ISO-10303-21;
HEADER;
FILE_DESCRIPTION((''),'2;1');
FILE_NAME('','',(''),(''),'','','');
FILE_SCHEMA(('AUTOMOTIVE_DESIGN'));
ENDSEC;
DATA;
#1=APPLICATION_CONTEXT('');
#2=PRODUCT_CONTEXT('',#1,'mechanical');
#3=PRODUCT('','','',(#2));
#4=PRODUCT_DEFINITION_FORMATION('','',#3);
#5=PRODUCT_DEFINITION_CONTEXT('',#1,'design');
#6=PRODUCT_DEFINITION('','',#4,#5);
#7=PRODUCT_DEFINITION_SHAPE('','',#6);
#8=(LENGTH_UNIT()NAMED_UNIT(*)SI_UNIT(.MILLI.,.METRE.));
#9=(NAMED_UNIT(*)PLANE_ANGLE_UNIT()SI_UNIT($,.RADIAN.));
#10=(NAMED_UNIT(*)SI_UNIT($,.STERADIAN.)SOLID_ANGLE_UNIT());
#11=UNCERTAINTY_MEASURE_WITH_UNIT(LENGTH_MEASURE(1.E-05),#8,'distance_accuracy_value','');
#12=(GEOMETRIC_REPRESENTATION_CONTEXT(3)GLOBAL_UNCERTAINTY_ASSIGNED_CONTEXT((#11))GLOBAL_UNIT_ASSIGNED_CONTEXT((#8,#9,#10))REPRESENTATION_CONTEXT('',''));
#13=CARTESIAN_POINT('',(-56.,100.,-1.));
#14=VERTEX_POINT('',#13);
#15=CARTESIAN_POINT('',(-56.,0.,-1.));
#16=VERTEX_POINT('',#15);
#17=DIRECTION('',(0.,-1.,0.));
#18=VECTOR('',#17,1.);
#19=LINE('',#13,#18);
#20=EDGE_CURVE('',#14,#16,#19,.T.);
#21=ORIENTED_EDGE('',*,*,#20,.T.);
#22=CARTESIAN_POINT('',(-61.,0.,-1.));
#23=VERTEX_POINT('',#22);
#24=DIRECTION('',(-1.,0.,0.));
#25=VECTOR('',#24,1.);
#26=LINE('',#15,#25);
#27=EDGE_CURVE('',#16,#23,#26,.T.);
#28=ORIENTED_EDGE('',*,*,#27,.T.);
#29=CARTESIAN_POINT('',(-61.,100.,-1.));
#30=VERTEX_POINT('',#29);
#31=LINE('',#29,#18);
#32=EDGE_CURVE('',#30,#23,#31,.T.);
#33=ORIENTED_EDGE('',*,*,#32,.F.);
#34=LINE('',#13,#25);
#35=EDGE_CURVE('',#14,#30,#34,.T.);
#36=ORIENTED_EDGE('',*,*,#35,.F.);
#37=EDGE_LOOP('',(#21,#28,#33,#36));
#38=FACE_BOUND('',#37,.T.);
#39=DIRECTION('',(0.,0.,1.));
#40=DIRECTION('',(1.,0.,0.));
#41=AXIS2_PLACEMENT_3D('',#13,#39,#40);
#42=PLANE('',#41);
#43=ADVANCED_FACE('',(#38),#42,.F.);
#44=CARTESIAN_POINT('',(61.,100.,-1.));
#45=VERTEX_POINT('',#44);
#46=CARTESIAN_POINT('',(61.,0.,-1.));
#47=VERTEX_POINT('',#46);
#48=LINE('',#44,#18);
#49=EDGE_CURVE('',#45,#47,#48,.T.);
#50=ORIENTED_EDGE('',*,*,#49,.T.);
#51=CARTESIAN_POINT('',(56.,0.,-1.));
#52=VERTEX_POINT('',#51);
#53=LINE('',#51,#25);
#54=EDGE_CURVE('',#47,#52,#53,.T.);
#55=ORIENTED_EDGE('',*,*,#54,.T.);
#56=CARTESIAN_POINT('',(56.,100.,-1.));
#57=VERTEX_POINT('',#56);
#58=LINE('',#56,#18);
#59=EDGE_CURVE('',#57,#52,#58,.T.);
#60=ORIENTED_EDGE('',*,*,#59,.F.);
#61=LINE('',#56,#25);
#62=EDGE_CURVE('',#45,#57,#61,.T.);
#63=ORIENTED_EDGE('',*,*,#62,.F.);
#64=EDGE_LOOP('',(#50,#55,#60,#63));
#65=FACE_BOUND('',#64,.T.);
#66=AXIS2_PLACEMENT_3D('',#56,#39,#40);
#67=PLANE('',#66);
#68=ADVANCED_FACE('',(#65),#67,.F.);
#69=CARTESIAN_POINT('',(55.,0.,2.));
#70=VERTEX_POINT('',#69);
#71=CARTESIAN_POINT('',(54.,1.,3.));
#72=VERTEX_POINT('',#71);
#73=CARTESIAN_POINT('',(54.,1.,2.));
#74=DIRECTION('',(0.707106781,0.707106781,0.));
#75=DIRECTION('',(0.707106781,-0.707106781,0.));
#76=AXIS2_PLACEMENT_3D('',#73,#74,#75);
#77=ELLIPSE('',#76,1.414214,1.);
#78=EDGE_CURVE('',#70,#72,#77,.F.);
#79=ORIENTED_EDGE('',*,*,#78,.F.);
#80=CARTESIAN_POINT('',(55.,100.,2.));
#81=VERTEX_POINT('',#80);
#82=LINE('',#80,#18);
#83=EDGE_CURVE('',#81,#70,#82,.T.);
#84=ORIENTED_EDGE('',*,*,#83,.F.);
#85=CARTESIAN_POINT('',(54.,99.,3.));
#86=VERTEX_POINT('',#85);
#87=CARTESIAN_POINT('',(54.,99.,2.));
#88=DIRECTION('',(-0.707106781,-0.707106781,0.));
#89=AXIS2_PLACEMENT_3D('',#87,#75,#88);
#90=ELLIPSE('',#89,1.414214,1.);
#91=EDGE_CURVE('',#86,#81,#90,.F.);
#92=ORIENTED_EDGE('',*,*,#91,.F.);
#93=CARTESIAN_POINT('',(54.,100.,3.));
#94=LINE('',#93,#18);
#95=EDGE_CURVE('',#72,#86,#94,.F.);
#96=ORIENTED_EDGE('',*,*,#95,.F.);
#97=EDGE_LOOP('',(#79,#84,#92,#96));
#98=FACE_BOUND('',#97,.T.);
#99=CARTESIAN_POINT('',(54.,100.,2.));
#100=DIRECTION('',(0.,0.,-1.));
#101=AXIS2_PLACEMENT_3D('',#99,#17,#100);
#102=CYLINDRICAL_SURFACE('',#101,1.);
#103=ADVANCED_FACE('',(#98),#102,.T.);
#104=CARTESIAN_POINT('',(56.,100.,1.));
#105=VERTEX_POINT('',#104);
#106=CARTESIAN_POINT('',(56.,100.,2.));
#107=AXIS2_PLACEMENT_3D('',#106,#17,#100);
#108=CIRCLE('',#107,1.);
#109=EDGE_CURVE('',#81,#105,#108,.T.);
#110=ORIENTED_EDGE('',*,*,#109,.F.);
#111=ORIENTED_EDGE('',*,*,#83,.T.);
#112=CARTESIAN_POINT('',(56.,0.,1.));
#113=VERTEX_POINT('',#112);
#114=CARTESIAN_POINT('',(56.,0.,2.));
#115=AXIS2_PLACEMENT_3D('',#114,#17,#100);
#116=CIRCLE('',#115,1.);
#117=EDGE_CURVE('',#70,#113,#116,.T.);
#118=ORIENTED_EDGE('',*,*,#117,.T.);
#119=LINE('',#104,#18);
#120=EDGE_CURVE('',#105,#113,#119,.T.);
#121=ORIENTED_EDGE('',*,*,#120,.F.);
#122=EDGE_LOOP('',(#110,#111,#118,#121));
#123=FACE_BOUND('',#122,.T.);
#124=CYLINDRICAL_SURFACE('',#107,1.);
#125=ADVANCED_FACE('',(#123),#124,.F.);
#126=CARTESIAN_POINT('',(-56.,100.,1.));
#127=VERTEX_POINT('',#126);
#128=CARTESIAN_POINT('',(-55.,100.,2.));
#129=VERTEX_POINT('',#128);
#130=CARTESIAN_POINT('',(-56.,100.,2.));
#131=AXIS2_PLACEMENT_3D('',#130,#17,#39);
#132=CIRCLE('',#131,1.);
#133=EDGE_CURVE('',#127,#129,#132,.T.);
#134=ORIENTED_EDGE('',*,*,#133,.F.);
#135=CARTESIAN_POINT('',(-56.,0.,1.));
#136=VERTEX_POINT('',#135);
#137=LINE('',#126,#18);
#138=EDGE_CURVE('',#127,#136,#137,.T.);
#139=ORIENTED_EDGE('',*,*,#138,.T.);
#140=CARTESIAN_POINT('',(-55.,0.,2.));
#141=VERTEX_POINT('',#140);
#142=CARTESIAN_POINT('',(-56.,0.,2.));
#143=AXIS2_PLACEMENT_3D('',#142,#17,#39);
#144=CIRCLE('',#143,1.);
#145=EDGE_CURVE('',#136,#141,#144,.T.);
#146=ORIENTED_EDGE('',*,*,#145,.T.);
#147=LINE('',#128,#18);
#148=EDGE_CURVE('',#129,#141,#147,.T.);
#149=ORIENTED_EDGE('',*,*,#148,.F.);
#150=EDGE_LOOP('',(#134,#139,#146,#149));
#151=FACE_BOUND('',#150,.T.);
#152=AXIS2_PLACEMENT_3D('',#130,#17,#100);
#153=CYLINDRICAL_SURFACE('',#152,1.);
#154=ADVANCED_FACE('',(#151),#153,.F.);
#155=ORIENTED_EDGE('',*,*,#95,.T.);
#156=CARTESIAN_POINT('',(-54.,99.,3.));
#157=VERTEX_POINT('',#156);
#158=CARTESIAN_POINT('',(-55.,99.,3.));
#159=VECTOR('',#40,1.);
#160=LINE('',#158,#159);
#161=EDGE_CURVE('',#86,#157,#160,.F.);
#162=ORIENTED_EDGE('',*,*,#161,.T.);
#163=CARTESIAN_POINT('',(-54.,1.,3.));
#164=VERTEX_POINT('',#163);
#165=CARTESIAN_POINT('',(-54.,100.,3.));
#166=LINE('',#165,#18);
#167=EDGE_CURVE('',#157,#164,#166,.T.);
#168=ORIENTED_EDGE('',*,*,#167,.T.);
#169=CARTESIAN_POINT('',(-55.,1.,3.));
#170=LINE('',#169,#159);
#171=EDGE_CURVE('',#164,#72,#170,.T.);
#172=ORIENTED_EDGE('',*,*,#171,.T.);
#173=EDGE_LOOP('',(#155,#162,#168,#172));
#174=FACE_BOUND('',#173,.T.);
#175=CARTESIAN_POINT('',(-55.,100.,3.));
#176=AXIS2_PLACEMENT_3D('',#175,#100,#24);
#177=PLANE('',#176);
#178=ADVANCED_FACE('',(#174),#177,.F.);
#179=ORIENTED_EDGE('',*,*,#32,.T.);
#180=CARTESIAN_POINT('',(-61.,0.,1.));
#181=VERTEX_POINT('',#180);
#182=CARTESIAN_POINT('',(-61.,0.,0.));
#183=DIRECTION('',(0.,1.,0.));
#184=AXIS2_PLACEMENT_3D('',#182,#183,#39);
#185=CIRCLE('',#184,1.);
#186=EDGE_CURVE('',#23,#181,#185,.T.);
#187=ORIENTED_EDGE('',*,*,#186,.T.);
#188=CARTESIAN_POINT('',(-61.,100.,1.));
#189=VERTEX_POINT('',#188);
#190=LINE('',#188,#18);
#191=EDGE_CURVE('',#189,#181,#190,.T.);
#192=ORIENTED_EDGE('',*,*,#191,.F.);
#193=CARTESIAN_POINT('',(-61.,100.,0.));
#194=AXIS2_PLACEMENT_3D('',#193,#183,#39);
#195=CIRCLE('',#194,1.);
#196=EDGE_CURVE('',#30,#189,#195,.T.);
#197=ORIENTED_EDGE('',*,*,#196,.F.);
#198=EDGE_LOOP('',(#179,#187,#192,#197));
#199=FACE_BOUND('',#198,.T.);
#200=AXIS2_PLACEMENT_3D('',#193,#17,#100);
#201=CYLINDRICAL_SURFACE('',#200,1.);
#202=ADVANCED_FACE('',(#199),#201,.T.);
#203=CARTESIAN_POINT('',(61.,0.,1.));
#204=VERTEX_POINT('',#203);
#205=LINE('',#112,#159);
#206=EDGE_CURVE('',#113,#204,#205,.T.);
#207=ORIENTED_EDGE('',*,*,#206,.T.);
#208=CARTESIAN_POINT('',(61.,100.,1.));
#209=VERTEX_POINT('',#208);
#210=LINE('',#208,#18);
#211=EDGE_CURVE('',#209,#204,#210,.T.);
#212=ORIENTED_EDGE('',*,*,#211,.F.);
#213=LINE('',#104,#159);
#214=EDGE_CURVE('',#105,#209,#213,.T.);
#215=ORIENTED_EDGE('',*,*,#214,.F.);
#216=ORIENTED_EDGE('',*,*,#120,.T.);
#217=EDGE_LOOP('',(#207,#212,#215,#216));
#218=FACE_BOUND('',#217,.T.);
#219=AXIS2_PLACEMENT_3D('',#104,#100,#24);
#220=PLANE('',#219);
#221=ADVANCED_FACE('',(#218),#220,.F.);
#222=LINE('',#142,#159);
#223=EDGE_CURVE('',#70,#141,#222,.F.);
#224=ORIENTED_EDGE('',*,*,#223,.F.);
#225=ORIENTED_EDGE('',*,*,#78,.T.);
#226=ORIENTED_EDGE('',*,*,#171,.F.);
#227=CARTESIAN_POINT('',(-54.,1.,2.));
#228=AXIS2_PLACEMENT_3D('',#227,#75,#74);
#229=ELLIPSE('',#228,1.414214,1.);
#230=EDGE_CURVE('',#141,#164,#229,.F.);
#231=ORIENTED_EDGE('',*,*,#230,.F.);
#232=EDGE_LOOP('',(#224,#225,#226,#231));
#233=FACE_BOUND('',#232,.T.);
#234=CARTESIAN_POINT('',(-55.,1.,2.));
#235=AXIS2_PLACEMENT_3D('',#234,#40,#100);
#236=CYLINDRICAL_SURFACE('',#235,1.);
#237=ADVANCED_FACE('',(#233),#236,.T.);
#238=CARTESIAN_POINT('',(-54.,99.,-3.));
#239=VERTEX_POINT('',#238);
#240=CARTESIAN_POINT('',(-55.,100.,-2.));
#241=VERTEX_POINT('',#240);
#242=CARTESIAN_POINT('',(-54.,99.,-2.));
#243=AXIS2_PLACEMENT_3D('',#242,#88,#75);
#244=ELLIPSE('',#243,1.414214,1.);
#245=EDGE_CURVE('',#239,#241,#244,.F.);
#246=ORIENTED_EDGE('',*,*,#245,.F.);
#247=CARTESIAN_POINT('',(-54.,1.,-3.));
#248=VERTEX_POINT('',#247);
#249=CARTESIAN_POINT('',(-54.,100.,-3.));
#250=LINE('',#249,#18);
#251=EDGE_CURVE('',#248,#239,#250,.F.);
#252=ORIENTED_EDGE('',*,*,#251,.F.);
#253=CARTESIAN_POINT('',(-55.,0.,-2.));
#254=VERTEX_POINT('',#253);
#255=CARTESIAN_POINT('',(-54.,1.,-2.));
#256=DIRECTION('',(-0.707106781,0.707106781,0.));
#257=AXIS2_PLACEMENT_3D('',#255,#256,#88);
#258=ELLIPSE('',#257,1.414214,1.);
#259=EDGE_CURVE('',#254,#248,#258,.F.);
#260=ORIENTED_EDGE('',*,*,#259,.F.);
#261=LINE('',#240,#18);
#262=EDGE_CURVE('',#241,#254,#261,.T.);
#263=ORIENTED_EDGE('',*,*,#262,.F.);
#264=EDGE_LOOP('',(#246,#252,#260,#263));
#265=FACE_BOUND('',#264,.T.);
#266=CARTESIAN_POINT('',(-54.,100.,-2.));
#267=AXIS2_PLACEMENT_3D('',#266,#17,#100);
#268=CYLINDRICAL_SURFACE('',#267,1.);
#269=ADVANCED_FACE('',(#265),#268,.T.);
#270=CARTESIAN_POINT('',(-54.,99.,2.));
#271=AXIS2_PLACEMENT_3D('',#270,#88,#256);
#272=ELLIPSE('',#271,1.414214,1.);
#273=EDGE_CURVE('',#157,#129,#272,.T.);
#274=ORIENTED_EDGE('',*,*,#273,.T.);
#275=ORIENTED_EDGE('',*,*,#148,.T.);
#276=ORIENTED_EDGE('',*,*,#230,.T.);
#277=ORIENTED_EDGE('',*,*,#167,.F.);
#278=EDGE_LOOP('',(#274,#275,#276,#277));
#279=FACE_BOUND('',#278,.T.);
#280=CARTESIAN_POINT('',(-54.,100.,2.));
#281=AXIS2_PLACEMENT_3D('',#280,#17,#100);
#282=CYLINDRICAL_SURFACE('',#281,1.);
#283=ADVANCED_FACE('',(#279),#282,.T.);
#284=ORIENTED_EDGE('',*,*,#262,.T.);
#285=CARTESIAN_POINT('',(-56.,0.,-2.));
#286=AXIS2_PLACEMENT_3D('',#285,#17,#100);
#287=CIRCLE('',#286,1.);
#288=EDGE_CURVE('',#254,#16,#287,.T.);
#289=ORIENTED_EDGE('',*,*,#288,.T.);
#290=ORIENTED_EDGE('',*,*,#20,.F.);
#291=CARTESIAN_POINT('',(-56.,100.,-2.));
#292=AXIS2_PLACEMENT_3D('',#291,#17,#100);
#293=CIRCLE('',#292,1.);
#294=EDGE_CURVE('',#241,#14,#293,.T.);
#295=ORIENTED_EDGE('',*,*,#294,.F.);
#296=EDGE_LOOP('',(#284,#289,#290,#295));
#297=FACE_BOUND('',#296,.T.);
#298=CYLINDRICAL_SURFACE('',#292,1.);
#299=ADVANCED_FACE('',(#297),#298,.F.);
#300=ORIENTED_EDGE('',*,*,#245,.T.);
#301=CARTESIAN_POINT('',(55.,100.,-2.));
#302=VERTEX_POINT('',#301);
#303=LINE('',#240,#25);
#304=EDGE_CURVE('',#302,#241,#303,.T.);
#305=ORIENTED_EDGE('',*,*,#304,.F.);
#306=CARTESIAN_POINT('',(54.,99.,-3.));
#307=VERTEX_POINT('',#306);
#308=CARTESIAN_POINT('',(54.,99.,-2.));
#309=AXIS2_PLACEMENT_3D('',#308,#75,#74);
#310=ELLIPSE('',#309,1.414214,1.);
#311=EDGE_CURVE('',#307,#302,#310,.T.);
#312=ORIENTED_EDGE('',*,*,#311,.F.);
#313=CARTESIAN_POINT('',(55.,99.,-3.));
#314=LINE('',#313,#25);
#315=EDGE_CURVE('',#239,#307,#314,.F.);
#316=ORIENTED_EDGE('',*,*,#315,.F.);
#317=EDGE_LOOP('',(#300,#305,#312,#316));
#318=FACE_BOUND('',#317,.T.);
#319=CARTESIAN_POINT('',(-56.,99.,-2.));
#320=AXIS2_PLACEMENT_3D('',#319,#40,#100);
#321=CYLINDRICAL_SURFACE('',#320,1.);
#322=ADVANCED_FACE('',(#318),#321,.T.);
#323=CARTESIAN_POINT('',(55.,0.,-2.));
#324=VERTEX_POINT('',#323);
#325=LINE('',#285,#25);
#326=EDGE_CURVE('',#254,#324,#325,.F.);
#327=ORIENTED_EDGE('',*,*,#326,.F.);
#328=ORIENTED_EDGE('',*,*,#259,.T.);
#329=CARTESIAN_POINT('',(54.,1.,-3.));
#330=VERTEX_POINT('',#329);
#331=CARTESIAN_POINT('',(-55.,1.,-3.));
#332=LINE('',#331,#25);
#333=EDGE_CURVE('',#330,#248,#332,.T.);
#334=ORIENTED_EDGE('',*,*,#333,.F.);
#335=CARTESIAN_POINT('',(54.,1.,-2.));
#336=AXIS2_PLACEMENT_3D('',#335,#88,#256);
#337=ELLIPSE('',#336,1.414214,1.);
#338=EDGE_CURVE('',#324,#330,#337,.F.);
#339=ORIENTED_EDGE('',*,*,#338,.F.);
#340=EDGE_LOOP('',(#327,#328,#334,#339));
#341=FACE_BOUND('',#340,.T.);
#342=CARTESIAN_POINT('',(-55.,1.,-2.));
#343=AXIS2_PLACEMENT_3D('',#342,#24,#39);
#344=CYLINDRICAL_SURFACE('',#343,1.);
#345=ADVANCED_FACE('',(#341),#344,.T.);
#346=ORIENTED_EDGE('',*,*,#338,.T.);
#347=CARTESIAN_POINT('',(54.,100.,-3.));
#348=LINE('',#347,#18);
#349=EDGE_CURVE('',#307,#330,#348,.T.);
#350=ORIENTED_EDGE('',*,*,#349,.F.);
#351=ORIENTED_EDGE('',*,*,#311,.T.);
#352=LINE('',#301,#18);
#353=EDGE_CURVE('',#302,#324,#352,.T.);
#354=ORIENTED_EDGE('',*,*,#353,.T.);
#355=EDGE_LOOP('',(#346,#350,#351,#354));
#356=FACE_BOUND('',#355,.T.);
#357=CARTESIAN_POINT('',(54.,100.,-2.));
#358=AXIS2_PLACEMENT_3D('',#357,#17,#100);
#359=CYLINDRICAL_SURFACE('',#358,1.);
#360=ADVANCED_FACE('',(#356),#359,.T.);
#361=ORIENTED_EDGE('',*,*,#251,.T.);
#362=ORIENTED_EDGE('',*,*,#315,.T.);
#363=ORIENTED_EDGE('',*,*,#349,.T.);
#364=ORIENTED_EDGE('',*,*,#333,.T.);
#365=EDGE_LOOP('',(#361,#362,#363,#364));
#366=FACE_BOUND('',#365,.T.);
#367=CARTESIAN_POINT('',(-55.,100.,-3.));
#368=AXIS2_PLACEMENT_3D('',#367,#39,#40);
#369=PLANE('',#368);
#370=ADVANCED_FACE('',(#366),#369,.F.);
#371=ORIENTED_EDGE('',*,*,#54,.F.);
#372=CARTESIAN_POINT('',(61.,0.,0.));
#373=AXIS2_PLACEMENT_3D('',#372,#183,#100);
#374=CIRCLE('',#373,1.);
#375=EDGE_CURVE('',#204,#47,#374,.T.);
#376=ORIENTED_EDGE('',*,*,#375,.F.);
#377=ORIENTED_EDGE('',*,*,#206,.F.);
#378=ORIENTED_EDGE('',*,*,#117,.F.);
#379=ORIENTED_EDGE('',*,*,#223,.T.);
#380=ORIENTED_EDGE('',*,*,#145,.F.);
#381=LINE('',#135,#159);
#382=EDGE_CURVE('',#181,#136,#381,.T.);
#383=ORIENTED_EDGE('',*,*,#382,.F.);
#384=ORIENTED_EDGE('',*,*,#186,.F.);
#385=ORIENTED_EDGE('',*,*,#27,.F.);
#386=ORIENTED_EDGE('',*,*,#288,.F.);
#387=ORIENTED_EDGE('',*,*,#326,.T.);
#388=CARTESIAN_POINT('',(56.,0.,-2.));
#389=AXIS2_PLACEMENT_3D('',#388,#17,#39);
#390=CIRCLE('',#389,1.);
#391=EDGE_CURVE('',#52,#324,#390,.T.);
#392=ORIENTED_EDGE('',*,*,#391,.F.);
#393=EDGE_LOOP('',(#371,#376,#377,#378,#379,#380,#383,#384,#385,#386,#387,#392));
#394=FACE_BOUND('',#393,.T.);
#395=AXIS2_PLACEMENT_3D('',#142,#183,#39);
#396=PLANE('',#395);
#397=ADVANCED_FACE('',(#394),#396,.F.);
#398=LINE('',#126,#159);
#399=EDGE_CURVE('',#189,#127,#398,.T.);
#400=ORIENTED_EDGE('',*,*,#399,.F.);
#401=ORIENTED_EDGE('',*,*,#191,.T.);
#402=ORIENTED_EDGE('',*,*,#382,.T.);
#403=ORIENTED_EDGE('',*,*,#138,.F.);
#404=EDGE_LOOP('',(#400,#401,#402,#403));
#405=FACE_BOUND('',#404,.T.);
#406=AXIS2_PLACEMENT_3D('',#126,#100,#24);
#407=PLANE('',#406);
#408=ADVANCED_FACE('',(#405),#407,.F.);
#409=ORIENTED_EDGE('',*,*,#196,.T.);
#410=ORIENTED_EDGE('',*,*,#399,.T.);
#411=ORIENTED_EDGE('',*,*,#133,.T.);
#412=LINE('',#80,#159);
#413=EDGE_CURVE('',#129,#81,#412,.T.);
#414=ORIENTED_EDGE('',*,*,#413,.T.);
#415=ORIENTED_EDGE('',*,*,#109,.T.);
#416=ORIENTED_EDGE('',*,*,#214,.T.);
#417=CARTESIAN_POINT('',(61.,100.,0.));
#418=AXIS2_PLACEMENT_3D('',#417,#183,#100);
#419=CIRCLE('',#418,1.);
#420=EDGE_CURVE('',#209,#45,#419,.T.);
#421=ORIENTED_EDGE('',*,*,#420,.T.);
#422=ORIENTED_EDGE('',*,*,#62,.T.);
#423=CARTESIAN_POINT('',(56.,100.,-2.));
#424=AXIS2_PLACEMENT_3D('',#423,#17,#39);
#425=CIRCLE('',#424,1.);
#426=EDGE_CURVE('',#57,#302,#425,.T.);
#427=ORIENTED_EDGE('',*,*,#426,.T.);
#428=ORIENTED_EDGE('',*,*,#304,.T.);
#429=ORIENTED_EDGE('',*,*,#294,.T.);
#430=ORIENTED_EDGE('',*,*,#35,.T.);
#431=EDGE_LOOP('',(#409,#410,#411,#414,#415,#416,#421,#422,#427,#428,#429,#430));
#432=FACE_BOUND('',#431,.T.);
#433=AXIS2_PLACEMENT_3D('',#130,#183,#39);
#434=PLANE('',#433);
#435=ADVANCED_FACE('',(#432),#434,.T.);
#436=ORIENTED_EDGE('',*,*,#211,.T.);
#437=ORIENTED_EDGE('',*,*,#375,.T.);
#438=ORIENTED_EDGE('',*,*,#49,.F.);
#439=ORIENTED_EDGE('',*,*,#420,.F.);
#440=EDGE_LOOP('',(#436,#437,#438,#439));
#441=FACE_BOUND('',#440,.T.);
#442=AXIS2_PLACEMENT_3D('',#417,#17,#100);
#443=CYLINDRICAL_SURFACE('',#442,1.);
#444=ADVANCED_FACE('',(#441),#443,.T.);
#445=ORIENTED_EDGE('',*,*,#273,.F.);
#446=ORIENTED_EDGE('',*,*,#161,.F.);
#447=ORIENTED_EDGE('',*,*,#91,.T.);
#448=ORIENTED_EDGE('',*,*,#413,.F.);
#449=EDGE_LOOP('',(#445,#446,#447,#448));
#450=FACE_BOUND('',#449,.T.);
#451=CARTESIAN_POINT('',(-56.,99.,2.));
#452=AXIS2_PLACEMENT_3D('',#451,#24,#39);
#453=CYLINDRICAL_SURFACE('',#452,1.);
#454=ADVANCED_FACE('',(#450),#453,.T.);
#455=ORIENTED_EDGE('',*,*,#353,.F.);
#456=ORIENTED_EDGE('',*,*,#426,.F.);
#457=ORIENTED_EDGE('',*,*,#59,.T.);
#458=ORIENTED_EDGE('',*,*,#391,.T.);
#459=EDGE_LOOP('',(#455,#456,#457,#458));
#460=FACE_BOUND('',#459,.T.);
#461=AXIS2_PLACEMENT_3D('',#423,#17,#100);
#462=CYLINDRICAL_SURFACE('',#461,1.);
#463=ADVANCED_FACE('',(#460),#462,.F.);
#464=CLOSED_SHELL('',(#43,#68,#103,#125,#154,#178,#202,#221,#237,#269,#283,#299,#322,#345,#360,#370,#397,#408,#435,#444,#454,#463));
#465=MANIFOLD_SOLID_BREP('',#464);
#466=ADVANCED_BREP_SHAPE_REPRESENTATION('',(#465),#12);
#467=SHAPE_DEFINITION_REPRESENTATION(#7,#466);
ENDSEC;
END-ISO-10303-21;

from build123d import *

# Parameters (mm, degrees)
BOSS_EXTRUDE1_DEPTH = 100
FILLET1_R           = 1


with BuildPart() as part:
    # Sketch2 → Boss-Extrude1 (new body)
    with BuildSketch(Plane(origin=(0, 0, 0), x_dir=(1, 0, 0), z_dir=(0, 1, 0))):
        with BuildLine():
            Line((-55, 3), (55, 3))
            Line((55, 3), (55, 2))
            ThreePointArc((55, 2), (55.292893219, 1.292893219), (56, 1))
            Line((56, 1), (61, 1))
            ThreePointArc((61, 1), (62, 0), (61, -1))
            Line((61, -1), (56, -1))
            ThreePointArc((56, -1), (55.292893219, -1.292893219), (55, -2))
            Line((55, -2), (55, -3))
            Line((55, -3), (-55, -3))
            Line((-55, -3), (-55, -2))
            ThreePointArc((-55, -2), (-55.292893219, -1.292893219), (-56, -1))
            Line((-56, -1), (-61, -1))
            ThreePointArc((-61, -1), (-62, 0), (-61, 1))
            Line((-61, 1), (-56, 1))
            ThreePointArc((-56, 1), (-55.292893219, 1.292893219), (-55, 2))
            Line((-55, 2), (-55, 3))
        make_face()
    extrude(amount=BOSS_EXTRUDE1_DEPTH)

    # Fillet1
    fillet1_edges = [part.edges().sort_by_distance(p)[0] for p in [
        (55, 50, -3),
        (0, 100, -3),
        (-55, 50, -3),
        (0, 0, -3),
        (-55, 50, 3),
        (0, 100, 3),
        (55, 50, 3),
        (0, 0, 3),
    ]]
    fillet(fillet1_edges, radius=FILLET1_R - 0.0001)  # a hair under: the kernel refuses the full size


solid = part.part
